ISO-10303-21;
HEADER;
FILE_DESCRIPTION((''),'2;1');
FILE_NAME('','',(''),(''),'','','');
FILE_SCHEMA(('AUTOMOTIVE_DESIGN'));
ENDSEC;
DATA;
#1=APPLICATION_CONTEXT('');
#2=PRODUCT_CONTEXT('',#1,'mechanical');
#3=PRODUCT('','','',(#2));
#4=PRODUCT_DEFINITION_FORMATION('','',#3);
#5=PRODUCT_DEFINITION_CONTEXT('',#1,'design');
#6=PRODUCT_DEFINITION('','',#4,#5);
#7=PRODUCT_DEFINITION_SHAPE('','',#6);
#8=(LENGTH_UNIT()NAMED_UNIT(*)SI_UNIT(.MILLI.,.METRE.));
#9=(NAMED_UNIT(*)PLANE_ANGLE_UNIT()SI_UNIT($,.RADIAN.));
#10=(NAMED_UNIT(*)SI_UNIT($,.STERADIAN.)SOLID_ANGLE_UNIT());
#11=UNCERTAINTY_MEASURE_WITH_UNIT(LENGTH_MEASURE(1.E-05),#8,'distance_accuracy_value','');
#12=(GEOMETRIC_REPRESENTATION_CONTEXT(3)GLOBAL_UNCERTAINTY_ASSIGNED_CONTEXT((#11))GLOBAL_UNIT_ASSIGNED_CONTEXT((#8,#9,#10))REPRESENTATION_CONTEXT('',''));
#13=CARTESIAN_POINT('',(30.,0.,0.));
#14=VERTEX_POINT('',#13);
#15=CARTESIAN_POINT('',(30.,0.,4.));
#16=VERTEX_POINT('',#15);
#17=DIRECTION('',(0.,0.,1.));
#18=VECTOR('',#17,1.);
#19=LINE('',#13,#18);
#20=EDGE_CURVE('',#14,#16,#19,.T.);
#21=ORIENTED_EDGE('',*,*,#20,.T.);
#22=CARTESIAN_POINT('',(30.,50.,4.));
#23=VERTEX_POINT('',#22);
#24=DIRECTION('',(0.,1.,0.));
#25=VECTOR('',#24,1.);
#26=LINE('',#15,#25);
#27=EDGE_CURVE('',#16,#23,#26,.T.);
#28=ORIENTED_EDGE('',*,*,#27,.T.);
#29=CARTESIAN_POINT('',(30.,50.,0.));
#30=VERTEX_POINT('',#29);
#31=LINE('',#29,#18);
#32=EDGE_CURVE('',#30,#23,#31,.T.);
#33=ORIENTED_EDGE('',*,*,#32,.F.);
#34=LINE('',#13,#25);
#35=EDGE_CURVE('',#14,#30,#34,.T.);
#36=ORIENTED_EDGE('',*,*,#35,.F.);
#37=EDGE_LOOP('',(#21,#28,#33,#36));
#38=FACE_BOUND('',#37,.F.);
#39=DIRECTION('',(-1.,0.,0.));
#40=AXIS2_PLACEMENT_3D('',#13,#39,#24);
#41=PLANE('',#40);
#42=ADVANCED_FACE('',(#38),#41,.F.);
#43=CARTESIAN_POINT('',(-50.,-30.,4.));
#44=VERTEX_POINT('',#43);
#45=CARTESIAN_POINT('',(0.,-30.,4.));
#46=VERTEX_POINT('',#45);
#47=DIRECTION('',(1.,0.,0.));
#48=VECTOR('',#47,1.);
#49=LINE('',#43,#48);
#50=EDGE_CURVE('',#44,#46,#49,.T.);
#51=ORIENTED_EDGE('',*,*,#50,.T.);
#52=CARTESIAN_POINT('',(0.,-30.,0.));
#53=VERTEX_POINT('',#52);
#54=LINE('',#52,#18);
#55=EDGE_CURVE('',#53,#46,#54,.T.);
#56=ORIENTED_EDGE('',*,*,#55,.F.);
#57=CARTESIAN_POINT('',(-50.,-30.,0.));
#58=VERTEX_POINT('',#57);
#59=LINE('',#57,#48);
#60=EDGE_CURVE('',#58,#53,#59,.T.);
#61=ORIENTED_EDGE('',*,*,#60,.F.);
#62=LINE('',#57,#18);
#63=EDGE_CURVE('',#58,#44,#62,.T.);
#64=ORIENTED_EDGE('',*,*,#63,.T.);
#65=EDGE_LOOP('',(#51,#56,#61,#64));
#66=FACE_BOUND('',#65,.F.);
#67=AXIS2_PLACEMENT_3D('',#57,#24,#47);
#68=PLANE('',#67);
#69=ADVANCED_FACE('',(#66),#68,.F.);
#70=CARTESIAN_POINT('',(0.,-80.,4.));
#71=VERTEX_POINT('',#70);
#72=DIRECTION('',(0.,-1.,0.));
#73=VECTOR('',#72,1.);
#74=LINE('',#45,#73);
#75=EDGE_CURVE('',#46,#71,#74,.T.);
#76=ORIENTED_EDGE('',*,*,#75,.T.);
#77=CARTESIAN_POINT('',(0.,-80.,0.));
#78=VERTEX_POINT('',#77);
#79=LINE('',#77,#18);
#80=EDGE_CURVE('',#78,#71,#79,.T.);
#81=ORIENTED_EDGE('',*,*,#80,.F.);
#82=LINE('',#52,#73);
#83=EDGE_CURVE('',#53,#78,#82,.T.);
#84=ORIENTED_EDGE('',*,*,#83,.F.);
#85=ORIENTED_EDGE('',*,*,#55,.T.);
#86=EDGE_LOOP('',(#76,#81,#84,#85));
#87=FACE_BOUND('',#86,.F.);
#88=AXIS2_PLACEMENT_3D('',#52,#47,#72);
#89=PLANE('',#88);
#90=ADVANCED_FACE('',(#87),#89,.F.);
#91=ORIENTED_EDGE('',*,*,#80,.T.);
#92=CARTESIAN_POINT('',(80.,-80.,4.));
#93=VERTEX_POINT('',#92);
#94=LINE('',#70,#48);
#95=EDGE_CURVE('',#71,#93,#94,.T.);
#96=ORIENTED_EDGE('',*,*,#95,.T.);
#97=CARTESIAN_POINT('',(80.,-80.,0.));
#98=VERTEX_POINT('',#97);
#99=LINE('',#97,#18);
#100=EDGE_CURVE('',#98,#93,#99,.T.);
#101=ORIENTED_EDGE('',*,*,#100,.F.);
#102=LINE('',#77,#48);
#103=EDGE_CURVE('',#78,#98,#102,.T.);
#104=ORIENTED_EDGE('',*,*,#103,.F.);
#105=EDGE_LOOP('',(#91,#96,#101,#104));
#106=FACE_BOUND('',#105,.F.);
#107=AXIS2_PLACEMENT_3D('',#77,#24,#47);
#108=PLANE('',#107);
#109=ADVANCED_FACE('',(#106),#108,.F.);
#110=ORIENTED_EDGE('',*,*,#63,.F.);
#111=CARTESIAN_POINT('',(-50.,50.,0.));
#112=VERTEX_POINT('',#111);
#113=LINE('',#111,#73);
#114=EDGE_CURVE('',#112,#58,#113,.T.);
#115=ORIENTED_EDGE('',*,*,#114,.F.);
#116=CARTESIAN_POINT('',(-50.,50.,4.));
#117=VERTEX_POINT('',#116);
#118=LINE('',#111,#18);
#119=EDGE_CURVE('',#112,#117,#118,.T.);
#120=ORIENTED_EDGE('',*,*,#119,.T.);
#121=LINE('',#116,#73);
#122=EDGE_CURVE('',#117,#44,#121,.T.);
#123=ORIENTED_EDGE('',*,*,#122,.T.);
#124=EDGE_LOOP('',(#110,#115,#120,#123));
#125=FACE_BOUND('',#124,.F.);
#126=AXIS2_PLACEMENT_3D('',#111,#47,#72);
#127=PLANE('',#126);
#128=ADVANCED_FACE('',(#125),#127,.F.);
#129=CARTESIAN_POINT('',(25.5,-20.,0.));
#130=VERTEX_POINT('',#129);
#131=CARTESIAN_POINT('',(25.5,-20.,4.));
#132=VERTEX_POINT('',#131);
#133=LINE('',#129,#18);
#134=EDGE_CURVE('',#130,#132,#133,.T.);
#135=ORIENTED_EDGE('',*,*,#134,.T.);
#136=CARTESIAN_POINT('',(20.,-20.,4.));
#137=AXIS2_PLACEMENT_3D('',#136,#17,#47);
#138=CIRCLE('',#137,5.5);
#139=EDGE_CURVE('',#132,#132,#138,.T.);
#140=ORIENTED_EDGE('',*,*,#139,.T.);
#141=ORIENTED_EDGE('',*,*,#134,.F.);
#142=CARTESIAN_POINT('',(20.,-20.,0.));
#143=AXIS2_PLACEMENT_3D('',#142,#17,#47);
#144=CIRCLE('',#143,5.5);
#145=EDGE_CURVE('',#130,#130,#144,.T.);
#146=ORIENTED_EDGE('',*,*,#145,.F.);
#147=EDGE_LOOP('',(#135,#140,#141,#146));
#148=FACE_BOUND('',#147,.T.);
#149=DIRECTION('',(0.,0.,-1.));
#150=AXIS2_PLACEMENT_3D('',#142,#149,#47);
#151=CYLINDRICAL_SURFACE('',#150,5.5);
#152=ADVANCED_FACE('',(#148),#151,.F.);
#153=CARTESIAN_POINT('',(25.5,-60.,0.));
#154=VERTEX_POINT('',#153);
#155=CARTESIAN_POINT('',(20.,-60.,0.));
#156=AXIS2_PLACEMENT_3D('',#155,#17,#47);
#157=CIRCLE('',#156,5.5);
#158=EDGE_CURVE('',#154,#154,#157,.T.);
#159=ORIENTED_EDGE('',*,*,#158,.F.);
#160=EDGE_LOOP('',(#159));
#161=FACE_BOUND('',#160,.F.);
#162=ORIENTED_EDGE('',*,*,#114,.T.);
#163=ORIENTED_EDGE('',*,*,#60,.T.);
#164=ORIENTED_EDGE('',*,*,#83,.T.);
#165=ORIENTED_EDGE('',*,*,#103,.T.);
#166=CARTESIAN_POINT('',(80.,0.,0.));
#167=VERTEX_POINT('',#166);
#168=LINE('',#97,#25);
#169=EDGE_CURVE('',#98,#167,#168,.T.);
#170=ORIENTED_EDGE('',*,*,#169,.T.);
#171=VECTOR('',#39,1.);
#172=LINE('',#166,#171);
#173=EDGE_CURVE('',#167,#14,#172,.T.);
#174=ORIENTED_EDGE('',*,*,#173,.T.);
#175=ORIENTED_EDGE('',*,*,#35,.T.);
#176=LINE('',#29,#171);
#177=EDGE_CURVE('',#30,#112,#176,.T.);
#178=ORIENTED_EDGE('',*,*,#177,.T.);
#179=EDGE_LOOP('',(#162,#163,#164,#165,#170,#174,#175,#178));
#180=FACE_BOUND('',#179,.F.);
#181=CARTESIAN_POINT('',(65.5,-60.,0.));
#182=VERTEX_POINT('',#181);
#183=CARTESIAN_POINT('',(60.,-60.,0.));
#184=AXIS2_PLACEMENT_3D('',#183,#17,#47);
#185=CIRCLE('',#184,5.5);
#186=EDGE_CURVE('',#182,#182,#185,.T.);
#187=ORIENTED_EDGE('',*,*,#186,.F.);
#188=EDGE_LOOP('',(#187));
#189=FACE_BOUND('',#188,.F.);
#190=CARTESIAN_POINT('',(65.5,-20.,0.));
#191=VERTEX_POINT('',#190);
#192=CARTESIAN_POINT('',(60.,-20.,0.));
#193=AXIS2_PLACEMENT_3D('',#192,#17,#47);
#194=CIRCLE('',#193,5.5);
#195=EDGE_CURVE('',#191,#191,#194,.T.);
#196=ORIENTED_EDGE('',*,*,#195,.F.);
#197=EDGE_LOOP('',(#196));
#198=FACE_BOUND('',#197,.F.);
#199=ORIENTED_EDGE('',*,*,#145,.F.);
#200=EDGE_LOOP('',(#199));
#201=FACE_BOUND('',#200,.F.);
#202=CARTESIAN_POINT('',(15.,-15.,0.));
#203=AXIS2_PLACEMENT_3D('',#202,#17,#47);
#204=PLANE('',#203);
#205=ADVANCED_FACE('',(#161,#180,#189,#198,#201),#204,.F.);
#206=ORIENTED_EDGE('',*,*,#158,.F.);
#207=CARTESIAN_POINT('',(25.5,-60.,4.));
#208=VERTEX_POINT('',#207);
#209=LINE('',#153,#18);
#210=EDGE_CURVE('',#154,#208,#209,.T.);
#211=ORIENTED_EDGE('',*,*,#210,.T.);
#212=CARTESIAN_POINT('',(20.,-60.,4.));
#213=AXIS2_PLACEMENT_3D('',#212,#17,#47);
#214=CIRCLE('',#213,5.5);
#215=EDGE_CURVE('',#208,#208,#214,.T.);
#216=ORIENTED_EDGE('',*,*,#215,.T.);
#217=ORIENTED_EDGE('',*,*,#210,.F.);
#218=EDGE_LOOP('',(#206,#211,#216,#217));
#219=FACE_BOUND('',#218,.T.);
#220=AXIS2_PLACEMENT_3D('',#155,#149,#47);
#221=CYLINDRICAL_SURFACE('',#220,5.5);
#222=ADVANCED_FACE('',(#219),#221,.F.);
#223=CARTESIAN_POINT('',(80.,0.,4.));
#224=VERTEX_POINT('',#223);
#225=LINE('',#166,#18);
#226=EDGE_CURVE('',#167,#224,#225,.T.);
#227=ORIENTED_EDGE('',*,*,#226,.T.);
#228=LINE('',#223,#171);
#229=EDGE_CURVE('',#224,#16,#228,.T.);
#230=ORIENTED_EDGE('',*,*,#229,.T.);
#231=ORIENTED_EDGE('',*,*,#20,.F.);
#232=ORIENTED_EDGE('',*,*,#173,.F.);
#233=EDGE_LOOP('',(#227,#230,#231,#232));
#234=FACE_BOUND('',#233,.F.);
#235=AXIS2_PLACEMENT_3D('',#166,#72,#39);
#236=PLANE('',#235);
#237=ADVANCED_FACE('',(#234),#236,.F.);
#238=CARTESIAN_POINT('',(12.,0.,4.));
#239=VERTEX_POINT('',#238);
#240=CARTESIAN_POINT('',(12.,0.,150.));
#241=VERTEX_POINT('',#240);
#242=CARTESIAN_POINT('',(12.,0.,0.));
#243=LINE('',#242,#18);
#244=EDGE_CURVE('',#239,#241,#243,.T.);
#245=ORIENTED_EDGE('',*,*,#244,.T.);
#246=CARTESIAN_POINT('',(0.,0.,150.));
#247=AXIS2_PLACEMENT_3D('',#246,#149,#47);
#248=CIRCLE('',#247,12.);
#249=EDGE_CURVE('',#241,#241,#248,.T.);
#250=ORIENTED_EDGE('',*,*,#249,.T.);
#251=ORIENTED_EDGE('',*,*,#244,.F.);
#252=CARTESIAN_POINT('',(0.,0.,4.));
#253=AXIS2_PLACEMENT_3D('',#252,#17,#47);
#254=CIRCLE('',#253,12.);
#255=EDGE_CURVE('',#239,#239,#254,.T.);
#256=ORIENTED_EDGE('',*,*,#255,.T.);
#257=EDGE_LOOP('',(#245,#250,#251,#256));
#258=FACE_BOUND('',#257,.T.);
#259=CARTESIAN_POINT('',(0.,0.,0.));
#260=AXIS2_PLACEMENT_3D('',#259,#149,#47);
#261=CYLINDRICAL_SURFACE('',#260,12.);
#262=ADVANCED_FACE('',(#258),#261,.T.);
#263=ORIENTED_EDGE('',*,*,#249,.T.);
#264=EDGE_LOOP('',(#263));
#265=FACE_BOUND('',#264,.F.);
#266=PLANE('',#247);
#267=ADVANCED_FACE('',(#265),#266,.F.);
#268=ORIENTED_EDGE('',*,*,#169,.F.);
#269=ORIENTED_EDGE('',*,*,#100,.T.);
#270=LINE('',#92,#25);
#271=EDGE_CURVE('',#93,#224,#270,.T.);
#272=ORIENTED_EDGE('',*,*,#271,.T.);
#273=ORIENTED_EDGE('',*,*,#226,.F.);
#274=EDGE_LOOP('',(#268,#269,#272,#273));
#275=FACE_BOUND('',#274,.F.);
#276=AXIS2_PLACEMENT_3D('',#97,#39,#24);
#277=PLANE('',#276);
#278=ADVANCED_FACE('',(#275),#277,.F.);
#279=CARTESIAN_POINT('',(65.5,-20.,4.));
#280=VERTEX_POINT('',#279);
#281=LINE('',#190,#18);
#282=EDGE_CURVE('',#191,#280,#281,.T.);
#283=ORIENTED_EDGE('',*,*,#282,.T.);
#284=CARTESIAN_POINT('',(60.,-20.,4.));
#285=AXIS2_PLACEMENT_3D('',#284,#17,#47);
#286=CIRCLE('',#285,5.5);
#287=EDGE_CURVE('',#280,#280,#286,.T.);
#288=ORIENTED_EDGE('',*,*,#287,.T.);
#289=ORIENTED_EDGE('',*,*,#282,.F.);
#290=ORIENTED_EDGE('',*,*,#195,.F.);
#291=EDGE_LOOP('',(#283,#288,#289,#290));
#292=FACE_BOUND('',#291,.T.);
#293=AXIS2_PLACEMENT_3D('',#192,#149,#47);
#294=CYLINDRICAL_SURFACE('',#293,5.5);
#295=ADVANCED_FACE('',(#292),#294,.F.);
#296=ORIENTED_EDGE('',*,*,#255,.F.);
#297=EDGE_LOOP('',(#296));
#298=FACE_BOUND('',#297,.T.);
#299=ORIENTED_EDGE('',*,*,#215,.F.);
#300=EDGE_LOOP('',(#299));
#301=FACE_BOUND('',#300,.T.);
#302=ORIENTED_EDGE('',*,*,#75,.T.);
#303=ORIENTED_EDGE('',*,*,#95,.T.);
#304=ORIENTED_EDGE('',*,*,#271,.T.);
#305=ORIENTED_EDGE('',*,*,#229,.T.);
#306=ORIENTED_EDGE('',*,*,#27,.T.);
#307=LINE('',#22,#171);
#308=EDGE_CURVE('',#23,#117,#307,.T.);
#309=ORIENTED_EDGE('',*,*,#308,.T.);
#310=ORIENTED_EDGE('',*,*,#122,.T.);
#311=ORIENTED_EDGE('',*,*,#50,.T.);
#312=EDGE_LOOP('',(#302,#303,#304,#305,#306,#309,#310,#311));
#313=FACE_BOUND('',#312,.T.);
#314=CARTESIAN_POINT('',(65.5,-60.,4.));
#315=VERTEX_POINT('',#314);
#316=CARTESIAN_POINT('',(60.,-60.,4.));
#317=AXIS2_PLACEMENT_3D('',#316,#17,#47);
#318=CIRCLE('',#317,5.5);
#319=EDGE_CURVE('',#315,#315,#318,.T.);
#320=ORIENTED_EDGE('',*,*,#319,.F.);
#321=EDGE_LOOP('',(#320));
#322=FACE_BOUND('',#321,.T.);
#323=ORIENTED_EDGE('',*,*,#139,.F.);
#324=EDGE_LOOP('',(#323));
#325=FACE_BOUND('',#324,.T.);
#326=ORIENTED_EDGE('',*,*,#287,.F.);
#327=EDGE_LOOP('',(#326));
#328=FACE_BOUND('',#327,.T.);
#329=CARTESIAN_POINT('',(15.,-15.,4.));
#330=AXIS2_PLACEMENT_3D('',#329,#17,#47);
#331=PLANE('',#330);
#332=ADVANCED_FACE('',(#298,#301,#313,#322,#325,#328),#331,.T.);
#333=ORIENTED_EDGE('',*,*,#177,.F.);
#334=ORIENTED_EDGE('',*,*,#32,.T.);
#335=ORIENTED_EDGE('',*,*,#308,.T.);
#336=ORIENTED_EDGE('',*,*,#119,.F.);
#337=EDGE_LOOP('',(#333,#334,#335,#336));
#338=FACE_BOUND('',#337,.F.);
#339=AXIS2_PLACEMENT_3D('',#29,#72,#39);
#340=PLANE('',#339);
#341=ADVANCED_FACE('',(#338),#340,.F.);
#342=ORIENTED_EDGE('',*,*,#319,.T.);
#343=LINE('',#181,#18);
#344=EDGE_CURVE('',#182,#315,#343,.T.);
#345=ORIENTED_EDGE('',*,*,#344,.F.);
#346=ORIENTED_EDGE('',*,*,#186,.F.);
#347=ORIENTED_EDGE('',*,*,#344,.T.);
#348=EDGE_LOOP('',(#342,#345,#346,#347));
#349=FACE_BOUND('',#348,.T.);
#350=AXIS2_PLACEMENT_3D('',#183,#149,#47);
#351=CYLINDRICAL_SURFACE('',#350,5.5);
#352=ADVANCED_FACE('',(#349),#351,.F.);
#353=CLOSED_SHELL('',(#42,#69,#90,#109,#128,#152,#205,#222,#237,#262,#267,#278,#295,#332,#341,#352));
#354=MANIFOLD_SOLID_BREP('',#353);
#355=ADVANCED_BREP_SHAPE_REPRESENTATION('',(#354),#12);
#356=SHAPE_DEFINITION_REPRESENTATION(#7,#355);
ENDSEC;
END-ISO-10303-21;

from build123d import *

# Parameters (mm, degrees)
F0_R     = 5.5
F0_R_2   = 12
F1_DEPTH = 4
F2_R     = 12
F3_DEPTH = 150


with BuildPart() as f1:
    # F0 (on Top) → F1 (new body)
    with BuildSketch(Plane.XY):
        Polygon((30, 50), (-50, 50), (-50, -30), (0, -30), (0, -80), (80, -80), (80, 0), (30, 0), align=None)
        with Locations((20, -60)):
            Circle(F0_R, mode=Mode.SUBTRACT)
        with Locations((60, -60)):
            Circle(F0_R, mode=Mode.SUBTRACT)
        with Locations((20, -20)):
            Circle(F0_R, mode=Mode.SUBTRACT)
        with Locations((60, -20)):
            Circle(F0_R, mode=Mode.SUBTRACT)
        Circle(F0_R_2, mode=Mode.SUBTRACT)
    extrude(amount=F1_DEPTH)

    # F2 (on face) → F3 (join)
    with BuildSketch(Plane(origin=(0, 0, 0), x_dir=(1, 0, 0), z_dir=(0, 0, -1))):
        Circle(F2_R)
    extrude(amount=-F3_DEPTH)


solid = f1.part
